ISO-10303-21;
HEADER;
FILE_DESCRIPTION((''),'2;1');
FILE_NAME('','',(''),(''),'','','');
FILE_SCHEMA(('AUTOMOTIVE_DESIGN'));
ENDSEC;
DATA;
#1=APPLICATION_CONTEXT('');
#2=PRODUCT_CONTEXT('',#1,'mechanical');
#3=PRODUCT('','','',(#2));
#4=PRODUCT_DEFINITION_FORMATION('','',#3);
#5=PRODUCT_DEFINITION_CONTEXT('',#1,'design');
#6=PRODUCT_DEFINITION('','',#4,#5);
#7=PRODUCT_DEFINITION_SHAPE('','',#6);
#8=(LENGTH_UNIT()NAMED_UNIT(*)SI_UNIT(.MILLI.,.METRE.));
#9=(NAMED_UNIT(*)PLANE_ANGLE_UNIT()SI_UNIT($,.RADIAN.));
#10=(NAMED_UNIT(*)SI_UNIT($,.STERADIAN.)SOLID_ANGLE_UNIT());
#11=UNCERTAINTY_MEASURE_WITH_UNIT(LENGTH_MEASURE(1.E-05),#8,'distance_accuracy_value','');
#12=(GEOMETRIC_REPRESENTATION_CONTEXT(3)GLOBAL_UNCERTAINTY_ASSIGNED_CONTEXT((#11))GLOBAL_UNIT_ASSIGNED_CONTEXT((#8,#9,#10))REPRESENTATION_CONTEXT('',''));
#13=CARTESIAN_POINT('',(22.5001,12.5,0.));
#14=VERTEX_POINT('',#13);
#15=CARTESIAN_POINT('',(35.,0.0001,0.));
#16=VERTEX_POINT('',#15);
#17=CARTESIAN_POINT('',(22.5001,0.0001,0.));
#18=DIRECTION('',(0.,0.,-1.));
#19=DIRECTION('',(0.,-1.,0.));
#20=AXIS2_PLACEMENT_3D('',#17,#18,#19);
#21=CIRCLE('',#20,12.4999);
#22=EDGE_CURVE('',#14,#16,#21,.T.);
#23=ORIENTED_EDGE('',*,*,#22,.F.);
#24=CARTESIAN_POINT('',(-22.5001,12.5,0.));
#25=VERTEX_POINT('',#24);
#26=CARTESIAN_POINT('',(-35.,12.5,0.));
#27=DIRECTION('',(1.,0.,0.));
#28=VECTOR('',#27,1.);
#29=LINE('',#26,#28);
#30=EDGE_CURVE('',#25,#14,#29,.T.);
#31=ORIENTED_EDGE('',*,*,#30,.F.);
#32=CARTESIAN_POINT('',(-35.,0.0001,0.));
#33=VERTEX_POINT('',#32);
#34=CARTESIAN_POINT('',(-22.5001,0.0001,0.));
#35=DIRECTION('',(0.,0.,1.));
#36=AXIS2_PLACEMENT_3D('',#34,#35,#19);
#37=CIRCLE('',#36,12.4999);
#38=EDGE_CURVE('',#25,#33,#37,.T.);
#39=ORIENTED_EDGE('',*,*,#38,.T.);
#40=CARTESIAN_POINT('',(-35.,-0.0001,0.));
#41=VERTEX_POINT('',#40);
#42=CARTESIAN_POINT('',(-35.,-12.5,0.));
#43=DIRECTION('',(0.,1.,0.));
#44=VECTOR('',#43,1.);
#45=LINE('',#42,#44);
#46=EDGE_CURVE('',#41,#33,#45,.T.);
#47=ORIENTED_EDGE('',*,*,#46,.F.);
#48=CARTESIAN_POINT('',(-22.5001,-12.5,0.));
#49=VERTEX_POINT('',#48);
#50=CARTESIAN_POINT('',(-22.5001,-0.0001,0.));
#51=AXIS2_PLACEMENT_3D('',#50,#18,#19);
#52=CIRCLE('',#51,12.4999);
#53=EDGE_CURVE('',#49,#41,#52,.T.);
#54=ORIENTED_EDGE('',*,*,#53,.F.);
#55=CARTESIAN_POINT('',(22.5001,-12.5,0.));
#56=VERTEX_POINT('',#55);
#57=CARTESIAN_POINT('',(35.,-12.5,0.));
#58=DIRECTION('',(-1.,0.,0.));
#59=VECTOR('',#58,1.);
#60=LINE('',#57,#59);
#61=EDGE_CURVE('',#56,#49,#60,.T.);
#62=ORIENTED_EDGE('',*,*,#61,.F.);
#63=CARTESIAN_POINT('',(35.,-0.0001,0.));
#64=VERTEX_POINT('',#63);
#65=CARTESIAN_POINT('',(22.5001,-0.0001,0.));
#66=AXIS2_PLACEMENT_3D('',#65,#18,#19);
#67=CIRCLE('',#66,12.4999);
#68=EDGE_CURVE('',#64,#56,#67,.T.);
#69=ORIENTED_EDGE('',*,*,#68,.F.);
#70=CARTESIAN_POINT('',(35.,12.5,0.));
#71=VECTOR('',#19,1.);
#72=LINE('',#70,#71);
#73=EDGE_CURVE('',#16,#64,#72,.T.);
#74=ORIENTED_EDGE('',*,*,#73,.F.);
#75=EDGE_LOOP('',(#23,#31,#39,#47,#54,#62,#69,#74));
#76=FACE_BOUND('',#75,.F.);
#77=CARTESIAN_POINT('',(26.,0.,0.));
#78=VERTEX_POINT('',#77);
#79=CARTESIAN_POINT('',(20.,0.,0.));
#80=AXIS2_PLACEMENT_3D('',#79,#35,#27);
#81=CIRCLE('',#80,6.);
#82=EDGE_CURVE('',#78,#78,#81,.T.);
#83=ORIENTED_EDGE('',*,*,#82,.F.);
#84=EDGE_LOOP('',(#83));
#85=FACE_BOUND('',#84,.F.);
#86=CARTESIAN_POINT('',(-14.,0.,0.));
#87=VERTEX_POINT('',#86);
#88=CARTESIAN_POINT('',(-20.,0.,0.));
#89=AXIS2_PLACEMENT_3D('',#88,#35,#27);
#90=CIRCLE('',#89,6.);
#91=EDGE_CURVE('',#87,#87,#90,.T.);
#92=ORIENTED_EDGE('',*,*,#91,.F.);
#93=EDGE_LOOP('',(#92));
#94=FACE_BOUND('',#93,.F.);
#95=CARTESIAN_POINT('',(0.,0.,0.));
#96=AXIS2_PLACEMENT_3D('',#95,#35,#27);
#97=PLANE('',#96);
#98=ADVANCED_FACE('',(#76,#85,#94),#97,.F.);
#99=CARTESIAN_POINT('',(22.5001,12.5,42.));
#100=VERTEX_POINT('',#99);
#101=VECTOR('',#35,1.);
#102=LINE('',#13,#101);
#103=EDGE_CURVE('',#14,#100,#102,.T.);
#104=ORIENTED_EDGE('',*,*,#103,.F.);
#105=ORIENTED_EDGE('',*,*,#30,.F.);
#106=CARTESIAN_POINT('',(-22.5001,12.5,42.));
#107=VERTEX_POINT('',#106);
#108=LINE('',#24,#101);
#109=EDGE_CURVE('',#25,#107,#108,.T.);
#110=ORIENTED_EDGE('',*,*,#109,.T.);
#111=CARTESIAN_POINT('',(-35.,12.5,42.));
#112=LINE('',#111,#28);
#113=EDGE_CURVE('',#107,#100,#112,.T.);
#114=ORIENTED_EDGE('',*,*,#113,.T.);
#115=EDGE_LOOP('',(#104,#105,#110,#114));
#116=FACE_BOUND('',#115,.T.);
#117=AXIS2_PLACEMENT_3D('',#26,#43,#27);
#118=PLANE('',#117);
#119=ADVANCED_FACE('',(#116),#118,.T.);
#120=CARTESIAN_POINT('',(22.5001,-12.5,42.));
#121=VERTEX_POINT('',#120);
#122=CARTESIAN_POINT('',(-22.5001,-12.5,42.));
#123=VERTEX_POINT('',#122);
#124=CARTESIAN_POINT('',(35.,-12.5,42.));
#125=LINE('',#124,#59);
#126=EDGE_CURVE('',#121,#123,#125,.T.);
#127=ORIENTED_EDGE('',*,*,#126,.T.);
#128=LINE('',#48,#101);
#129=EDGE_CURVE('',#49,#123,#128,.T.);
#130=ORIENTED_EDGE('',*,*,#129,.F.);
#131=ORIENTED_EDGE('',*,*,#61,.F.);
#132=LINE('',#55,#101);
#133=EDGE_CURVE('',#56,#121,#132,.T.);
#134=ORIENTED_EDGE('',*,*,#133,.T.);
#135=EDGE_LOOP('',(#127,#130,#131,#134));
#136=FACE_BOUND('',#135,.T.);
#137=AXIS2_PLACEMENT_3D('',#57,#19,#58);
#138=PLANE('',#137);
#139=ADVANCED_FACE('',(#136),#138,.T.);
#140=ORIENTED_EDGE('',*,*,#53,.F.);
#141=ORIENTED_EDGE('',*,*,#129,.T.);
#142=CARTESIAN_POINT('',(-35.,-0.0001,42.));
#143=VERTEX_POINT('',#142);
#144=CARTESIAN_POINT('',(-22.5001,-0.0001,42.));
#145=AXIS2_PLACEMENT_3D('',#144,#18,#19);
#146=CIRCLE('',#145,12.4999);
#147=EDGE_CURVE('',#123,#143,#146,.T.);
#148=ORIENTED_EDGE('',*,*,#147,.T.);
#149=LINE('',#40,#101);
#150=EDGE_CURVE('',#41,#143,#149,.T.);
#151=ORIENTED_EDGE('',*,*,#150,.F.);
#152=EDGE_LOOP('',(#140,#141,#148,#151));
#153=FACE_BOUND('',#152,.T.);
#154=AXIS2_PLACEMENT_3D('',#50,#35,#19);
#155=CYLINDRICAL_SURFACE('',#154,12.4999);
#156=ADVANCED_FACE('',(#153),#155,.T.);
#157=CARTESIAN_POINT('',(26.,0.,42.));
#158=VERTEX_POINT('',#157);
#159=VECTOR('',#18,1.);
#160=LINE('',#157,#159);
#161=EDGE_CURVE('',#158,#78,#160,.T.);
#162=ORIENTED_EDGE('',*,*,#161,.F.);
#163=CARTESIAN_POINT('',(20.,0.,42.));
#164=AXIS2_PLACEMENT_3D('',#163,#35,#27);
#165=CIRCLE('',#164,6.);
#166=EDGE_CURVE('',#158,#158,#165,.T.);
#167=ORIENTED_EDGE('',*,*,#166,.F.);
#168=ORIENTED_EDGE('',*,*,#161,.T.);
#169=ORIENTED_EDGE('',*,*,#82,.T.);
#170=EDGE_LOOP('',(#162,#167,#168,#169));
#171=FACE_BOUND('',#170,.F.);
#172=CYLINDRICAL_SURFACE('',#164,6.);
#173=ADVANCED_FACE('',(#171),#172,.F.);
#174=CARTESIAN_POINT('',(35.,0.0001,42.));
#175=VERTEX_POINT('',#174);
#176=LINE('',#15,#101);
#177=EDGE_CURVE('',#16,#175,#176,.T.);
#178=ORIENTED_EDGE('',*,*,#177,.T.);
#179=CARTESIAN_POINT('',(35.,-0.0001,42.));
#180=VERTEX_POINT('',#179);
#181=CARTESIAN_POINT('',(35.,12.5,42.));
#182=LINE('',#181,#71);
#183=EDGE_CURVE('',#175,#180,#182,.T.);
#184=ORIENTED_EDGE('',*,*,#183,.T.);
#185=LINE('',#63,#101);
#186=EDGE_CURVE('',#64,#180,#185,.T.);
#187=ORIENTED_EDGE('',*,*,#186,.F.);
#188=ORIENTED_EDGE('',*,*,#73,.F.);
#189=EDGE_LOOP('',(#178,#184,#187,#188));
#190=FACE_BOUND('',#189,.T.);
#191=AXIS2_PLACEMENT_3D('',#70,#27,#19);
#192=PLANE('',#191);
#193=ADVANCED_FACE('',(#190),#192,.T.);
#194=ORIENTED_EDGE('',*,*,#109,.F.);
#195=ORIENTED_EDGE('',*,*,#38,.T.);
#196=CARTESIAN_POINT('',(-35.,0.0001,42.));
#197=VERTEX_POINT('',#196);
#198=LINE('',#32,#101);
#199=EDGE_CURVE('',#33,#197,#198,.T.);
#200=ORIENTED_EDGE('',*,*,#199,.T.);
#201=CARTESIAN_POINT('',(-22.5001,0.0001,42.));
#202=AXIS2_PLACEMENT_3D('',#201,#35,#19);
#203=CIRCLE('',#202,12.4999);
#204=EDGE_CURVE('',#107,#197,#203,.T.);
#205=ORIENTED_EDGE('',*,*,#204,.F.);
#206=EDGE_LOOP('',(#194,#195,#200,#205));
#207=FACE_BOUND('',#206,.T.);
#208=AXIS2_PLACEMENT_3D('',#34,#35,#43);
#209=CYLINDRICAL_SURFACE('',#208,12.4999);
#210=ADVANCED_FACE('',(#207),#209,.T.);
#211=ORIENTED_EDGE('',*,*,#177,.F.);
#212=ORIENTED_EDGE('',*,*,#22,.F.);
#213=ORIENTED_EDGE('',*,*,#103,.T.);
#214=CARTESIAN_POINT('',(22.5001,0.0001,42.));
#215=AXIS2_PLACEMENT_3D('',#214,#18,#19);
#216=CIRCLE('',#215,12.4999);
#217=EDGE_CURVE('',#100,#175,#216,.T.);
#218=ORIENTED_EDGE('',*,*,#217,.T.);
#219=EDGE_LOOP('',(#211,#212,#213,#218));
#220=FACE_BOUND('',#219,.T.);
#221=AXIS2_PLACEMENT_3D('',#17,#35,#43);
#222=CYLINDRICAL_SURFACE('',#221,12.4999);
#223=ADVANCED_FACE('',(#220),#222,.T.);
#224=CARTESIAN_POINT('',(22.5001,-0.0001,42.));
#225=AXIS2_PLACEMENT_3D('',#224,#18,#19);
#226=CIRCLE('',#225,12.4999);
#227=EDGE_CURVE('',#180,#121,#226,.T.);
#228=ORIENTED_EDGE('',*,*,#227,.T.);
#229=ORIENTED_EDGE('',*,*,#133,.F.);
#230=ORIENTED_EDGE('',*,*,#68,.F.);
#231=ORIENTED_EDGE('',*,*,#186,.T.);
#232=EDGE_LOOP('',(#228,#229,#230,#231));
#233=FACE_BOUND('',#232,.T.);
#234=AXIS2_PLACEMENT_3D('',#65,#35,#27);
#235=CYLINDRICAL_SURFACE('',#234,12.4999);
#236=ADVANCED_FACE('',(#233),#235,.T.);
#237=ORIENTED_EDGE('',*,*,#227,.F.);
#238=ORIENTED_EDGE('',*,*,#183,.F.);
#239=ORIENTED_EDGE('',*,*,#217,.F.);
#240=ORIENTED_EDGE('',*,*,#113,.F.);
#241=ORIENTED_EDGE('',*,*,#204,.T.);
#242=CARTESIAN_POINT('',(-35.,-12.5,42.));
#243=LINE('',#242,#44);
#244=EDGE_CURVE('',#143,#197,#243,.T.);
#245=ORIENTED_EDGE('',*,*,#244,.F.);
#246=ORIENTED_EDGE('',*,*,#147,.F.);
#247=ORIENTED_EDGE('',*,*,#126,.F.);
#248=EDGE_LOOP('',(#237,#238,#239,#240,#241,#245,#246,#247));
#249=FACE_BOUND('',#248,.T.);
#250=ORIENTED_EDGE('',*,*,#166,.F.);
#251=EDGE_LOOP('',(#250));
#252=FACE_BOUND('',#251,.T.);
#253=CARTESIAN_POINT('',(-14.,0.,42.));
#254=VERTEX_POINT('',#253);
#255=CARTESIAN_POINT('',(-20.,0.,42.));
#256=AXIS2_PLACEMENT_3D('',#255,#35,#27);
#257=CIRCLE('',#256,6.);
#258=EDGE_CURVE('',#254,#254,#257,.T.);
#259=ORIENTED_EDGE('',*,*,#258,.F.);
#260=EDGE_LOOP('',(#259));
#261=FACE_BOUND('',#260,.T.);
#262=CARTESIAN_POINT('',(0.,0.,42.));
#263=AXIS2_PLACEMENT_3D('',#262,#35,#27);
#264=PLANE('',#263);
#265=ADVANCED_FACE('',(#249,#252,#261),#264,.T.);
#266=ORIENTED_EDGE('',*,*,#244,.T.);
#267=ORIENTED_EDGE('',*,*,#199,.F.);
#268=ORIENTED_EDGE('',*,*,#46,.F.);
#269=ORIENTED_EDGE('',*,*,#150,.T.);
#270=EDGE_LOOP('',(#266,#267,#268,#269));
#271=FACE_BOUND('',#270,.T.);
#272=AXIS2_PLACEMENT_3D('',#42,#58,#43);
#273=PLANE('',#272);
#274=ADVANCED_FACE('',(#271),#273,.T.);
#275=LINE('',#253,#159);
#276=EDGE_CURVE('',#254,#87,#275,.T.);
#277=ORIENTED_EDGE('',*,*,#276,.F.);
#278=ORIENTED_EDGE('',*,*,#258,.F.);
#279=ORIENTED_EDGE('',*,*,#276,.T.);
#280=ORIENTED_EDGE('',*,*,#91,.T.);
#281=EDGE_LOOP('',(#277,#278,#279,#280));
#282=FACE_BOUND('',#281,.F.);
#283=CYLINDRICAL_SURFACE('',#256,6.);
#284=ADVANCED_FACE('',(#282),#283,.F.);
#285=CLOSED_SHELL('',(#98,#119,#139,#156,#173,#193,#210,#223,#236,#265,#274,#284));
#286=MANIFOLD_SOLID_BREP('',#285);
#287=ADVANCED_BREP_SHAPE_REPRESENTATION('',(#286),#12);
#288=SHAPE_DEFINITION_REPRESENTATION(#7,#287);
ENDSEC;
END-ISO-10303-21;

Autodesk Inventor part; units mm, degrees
ref_plane "YZ Plane" through (0, 0, 0) normal (1, 0, 0) x (0, 1, 0)
ref_plane "XZ Plane" through (0, 0, 0) normal (0, 1, 0) x (-1, 0, 0)
ref_plane "XY Plane" through (0, 0, 0) normal (0, 0, 1) x (1, 0, 0)
sketch "Sketch1" plane through (0, 0, 0) normal (0, 0, 1) x (1, 0, 0)
  line L0 (-35, 12.5) -> (35, 12.5)
  line L1 (35, 12.5) -> (35, -12.5)
  line L2 (35, -12.5) -> (-35, -12.5)
  line L3 (-35, -12.5) -> (-35, 12.5)
  point P0 (0, 0)
  dimension "d0" = 70
  dimension "d1" = 25
  dimension "d2" = 35
  dimension "d3" = 12.5
extrude "Extrusion1" add sketch "Sketch1" along normal blind 42
full round fillet "Full Round Fillet1" first side at (11.6667, 12.5, 14) centre faces at (-35, 4.1667, 14) second side at (-11.6667, -12.5, 14)
full round fillet "Full Round Fillet2" first side at (15.8333, 12.5, 14) centre faces at (35, -4.1667, 14) second side at (-3.3334, -12.5, 28)
sketch "Sketch2" plane through (0, 0, 42) normal (0, 0, 1) x (1, 0, 0)
  circle A0 centre (-20, 0) radius 6
  circle A1 centre (20, 0) radius 6
  point P0 (0, 0)
  dimension "d6" = 12
  dimension "d7" = 12
  dimension "d8" = 40
  dimension "d9" = 20
extrude "Extrusion2" cut sketch "Sketch2" against normal blind 42
thread "Thread1" size "M12x1.75" class "6H" standard "ANSI Metric M Profile" full length
thread "Thread2" size "M12x1.75" class "6H" standard "ANSI Metric M Profile" full length
properties part number "Topo Macaco" material "Steel AISI 1050"
